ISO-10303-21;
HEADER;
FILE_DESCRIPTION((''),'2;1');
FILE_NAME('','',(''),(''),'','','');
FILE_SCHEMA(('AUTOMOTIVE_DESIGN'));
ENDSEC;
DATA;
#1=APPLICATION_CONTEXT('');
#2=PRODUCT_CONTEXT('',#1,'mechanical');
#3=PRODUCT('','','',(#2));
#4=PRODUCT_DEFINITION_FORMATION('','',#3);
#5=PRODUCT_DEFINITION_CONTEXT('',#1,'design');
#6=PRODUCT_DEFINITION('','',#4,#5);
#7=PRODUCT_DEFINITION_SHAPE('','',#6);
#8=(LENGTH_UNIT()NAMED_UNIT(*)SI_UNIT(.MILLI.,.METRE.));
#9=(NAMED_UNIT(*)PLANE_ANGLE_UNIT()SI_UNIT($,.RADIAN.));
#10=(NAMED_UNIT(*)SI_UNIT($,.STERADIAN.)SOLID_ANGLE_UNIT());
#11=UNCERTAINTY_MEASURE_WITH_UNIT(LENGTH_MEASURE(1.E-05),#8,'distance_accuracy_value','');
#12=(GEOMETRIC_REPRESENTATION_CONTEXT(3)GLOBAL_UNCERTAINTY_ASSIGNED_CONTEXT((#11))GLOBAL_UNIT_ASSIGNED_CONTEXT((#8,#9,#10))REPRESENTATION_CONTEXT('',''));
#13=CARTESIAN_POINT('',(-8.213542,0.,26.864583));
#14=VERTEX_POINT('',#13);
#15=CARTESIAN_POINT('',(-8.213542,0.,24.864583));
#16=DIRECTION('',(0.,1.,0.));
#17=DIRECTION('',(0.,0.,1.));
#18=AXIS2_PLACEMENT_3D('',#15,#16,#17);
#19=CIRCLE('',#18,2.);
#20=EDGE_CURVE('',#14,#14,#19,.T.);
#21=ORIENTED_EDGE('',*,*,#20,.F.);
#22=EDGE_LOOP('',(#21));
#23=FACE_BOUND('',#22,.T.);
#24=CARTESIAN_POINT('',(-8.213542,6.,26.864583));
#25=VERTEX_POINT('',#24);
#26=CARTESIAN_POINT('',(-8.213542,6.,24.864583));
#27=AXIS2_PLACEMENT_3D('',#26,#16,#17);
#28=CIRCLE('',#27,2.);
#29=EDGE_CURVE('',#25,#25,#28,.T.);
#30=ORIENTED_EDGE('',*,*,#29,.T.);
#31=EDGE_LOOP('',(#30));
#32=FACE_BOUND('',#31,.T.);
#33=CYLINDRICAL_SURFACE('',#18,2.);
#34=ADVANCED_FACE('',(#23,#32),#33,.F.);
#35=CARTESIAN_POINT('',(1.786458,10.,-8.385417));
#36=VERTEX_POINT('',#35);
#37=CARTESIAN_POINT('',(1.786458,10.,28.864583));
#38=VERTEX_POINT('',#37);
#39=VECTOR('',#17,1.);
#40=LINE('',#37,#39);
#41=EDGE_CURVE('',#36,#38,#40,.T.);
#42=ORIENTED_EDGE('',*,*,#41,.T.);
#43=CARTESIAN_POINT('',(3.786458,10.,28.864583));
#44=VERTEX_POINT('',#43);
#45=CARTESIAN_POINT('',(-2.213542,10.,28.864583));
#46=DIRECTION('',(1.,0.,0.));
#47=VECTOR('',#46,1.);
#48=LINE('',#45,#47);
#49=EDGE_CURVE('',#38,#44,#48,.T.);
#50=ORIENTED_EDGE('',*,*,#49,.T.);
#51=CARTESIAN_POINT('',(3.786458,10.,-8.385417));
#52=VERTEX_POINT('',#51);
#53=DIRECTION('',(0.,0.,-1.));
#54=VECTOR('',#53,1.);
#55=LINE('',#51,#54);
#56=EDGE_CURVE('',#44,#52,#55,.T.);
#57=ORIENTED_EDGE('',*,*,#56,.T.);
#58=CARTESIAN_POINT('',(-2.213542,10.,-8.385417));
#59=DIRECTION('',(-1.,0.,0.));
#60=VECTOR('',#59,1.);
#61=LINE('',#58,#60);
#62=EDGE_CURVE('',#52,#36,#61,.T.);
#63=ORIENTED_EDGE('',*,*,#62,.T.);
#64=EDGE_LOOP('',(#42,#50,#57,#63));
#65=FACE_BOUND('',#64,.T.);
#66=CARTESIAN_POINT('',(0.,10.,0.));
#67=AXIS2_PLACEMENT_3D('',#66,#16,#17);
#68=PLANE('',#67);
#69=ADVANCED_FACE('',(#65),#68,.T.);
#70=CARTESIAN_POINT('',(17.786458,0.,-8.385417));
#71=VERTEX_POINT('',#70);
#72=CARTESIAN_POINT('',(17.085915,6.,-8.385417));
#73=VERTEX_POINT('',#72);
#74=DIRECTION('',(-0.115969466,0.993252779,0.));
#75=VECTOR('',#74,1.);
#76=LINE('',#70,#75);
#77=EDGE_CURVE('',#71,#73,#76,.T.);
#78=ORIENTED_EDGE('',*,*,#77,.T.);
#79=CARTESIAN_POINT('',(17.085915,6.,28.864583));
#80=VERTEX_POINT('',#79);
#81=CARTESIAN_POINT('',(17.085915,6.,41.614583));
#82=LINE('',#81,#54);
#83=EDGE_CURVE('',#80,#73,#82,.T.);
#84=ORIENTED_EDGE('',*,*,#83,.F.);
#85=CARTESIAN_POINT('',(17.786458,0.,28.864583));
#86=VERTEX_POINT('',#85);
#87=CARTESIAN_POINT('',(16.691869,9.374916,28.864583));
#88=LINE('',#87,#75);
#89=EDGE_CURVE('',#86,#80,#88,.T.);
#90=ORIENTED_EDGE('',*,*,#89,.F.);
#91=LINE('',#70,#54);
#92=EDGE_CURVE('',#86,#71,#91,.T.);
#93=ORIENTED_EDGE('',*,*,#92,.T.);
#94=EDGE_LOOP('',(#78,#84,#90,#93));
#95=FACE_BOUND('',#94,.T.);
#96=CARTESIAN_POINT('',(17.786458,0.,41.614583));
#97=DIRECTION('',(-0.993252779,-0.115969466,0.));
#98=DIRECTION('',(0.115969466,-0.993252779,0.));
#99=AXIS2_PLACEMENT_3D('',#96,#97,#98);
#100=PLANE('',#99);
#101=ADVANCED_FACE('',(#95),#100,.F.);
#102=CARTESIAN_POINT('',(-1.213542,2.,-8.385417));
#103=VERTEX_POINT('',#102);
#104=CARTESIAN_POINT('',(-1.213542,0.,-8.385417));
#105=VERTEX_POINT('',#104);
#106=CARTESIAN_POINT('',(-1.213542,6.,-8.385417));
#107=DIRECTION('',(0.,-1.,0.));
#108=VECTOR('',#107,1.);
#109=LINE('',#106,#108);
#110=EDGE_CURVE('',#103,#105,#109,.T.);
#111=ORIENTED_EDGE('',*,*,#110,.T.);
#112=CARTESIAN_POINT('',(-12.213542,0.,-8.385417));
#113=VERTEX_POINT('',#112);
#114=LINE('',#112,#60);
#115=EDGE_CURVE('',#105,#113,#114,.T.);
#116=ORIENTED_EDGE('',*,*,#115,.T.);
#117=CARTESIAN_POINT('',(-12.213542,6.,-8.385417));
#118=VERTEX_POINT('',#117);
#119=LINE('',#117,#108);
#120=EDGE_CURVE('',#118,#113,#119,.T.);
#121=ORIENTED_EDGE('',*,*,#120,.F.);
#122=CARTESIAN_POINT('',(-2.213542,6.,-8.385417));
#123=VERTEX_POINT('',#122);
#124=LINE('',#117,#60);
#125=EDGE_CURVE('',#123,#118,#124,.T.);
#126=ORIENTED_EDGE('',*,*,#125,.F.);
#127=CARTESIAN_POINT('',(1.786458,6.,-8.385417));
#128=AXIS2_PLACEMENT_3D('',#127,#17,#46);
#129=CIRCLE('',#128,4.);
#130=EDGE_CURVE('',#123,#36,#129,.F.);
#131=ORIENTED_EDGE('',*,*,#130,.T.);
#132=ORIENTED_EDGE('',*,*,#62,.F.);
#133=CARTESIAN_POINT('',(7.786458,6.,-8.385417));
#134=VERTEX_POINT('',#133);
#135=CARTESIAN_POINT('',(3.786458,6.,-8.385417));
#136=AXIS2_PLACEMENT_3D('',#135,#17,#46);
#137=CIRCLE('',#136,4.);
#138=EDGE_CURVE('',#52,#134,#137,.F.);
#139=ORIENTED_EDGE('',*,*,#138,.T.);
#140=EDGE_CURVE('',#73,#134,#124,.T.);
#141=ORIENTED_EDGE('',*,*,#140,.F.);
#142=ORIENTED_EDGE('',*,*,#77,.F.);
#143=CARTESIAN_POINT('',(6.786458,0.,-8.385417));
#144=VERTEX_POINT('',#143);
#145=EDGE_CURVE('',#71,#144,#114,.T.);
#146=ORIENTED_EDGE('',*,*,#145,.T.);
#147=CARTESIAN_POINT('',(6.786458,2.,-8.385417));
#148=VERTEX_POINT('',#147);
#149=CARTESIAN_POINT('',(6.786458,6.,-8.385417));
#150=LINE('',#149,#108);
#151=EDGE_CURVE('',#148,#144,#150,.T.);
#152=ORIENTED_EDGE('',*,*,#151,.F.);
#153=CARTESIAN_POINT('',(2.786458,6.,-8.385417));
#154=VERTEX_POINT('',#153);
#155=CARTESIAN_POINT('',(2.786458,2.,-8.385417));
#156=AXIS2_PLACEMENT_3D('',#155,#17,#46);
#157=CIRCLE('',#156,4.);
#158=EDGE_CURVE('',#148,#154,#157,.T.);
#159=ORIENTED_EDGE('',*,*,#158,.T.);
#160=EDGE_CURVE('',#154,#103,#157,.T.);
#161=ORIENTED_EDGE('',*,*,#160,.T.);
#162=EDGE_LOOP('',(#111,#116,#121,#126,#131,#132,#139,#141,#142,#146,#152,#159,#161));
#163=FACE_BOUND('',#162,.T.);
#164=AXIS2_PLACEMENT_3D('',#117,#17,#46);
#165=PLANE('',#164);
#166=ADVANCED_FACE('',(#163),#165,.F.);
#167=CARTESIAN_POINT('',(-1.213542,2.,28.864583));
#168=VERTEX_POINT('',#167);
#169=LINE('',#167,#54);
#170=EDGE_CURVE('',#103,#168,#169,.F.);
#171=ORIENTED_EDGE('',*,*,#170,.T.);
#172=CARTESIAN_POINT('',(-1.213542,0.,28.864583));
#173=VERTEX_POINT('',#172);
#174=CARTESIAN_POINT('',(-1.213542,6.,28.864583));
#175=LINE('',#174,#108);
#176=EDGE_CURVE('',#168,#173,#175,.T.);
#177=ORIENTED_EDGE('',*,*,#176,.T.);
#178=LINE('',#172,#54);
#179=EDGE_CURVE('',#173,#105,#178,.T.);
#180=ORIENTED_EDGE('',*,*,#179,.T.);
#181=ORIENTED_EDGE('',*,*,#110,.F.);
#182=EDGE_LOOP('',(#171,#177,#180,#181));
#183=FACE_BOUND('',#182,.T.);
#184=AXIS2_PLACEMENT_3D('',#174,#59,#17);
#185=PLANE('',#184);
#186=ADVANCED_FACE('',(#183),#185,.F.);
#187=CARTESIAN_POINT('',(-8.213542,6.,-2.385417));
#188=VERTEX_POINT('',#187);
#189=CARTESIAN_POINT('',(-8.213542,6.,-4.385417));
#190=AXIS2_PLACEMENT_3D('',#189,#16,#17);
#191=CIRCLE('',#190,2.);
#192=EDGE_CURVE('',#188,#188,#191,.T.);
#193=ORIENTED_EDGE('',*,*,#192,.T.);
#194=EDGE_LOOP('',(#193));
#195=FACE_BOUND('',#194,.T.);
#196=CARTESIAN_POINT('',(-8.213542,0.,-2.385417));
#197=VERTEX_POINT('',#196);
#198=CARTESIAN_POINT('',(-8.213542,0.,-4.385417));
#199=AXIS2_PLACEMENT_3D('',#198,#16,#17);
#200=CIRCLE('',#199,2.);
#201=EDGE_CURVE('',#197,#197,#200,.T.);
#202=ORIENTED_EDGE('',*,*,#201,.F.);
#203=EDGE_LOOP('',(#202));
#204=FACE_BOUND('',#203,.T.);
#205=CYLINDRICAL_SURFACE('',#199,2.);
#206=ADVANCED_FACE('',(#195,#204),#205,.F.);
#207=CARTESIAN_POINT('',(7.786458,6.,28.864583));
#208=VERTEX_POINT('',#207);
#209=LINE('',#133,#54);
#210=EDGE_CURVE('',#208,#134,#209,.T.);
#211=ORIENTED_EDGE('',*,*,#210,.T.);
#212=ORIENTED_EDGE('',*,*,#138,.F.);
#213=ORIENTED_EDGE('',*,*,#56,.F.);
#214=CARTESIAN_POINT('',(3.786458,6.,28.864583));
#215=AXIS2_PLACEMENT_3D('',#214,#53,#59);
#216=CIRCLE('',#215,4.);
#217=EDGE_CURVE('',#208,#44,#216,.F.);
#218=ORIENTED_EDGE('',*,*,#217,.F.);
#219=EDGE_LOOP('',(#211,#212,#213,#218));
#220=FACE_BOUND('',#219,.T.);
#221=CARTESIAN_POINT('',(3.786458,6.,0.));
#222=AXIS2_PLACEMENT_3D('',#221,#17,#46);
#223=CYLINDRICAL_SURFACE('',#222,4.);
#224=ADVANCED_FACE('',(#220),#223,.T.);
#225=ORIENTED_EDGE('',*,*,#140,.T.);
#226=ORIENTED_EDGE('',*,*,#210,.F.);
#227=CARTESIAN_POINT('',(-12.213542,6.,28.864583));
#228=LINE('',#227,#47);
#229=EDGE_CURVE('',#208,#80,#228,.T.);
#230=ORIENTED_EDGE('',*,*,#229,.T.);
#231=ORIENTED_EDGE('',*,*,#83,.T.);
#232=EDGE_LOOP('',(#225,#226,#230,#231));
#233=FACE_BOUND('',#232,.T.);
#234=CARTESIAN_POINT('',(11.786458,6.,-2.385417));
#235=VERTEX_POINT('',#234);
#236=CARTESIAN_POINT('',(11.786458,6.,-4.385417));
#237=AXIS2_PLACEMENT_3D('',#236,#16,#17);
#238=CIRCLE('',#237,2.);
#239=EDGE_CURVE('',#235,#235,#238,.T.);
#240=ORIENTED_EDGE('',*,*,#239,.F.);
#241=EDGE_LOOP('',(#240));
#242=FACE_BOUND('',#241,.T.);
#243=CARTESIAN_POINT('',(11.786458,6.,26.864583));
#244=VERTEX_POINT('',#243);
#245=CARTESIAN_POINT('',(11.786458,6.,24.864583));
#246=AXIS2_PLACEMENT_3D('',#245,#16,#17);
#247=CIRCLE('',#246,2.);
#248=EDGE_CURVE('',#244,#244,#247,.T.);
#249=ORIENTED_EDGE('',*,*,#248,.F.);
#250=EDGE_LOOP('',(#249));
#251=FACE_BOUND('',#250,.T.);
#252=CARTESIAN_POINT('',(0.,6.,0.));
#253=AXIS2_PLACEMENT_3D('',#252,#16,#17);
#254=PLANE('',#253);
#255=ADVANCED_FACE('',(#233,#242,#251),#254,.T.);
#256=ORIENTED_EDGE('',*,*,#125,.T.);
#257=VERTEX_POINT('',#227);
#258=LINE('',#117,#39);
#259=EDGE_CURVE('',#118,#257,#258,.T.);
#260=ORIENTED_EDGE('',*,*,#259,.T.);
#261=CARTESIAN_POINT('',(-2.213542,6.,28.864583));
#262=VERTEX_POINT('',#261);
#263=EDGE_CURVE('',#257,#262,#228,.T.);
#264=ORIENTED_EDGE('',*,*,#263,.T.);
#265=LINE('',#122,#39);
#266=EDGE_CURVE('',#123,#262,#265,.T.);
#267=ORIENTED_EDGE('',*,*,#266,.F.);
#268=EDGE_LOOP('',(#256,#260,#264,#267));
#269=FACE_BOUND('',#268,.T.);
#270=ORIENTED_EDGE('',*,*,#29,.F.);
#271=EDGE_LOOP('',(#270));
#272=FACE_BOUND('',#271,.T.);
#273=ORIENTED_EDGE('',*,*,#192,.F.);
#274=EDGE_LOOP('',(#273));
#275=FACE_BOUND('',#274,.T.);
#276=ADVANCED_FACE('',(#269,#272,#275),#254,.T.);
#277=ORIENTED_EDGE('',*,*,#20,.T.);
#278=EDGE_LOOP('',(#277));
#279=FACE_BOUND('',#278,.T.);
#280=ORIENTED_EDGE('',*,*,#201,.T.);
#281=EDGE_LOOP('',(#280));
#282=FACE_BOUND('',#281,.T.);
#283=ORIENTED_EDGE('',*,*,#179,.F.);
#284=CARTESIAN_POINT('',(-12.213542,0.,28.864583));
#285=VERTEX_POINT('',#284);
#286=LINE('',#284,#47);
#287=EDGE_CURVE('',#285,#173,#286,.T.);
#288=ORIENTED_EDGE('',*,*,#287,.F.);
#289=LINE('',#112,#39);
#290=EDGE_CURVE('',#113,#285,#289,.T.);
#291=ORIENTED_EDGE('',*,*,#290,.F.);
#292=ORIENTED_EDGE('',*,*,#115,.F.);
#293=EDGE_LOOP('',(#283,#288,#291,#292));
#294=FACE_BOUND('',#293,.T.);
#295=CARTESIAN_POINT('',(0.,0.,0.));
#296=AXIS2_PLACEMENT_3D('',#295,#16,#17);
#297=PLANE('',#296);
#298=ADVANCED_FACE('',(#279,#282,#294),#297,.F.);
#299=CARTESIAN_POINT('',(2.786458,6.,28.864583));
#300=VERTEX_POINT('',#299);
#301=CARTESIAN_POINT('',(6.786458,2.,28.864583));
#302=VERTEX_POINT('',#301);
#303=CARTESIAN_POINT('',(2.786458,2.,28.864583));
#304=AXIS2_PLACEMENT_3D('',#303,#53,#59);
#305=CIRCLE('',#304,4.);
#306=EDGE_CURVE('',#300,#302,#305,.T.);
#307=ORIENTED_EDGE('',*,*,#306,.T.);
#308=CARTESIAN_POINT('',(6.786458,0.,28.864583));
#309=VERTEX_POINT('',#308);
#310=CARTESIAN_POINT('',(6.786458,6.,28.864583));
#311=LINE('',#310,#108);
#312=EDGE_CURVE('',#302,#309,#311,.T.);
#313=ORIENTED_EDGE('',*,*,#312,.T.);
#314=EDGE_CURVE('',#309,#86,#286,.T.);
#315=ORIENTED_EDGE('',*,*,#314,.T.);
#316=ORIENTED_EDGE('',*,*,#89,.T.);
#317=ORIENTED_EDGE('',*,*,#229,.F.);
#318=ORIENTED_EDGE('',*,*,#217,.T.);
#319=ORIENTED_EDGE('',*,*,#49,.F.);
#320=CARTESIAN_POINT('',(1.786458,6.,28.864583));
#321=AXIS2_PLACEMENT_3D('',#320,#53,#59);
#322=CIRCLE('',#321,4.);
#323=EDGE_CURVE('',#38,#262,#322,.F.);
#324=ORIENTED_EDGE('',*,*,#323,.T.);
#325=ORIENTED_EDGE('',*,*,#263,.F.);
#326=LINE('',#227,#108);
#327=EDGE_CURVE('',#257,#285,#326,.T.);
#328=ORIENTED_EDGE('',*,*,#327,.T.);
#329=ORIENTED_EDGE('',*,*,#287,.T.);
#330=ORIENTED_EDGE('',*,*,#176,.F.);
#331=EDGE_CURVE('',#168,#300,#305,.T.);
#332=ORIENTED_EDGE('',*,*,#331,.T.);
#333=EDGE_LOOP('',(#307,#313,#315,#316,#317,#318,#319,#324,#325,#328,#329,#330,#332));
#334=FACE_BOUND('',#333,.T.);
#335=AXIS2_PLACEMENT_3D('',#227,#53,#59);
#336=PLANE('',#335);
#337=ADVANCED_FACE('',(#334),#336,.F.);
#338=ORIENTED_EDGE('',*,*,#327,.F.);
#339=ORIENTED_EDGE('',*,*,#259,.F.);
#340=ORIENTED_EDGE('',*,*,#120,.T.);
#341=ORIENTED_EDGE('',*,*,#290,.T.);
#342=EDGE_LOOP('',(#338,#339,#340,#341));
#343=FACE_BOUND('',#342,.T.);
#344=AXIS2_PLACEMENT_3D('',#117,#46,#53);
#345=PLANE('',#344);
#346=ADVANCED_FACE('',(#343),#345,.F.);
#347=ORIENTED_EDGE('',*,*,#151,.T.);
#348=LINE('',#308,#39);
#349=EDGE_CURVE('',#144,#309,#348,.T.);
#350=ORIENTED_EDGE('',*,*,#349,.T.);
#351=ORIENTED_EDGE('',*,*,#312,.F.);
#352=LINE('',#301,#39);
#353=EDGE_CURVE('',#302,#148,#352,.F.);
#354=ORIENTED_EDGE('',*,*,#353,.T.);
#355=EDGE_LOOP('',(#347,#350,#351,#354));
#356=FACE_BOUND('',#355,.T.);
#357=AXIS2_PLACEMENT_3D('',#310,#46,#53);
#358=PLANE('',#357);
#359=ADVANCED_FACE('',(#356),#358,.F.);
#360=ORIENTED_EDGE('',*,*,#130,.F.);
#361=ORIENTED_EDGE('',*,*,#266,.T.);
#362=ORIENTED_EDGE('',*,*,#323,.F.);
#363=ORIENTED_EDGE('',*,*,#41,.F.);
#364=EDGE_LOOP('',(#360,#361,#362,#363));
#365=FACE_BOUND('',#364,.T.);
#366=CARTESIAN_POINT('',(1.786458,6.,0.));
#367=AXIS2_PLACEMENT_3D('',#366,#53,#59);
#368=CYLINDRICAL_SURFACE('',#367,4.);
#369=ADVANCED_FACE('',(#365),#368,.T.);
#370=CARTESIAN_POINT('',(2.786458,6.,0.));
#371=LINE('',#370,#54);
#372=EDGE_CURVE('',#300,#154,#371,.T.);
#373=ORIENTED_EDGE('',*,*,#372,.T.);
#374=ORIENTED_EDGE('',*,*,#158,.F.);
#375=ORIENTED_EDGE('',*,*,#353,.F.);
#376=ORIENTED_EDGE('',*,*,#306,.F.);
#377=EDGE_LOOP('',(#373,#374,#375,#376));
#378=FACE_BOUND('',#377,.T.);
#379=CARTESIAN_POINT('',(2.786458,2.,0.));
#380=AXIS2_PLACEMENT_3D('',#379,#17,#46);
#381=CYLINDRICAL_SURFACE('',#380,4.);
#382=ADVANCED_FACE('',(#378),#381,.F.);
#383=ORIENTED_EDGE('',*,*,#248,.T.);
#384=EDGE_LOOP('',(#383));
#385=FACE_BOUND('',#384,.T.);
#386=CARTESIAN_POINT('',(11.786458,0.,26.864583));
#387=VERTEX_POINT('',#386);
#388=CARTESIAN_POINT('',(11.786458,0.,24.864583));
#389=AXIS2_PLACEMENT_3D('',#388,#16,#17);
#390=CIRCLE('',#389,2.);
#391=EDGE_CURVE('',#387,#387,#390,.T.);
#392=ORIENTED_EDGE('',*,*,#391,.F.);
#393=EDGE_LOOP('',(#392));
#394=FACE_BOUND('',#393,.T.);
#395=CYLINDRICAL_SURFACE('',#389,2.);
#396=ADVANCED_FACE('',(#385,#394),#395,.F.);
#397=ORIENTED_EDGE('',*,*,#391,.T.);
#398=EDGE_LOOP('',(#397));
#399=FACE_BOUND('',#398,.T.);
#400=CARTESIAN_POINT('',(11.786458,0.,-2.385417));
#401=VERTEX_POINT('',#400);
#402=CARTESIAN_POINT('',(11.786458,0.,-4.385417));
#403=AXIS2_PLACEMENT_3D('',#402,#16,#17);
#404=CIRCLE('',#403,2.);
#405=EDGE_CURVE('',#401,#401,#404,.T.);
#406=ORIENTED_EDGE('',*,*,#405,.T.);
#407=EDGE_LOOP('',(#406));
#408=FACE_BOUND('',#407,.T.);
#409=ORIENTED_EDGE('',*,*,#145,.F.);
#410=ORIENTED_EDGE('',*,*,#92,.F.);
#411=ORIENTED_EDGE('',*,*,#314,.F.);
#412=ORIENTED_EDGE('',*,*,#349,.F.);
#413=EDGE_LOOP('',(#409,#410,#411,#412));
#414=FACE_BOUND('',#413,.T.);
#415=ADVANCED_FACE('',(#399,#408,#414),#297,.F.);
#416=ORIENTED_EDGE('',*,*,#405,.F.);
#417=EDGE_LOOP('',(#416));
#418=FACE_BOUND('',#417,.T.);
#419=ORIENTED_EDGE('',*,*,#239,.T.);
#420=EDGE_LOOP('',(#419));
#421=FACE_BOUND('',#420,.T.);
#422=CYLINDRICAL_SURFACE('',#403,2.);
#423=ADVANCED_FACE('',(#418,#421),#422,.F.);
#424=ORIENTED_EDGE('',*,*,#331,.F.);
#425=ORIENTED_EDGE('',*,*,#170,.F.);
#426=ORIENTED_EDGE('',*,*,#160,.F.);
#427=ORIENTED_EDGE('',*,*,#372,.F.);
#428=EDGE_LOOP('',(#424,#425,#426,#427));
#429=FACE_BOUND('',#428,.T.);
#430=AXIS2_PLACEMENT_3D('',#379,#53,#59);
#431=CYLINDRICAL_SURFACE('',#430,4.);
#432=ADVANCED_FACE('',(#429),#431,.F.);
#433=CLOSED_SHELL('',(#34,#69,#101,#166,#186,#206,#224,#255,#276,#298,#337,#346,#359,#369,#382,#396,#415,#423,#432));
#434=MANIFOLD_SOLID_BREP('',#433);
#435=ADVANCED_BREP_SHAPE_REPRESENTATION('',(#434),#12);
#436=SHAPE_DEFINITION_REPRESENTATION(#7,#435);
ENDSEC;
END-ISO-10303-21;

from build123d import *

# Parameters (mm, degrees)
SKETCH1_W           = 30
SKETCH1_H           = 37.25
BOSS_EXTRUDE1_DEPTH = 6
SKETCH2_R           = 2
CUT_EXTRUDE1_DEPTH  = 6
SKETCH3_W           = 10
SKETCH3_H           = 37.25
BOSS_EXTRUDE2_DEPTH = 4
SKETCH4_W           = 8
SKETCH4_H           = 37.25
CUT_EXTRUDE2_DEPTH  = 6
FILLET2_R           = 4
FILLET3_R           = 4
CUT_EXTRUDE3_DEPTH  = 50


with BuildPart() as part:
    # Sketch1 → Boss-Extrude1 (new body)
    with BuildSketch(Plane(origin=(0, 0, 0), x_dir=(1, 0, 0), z_dir=(0, 1, 0))):
        with Locations((2.786458333, -10.239583333)):
            Rectangle(SKETCH1_W, SKETCH1_H)
    extrude(amount=BOSS_EXTRUDE1_DEPTH)

    # Sketch2 → Cut-Extrude1 (cut)
    with BuildSketch(Plane(origin=(0, 6, 0), x_dir=(1, 0, 0), z_dir=(0, 1, 0))):
        with Locations(Location((-8.213541667, -24.864583333, 0), (0, 0, 270))):
            Circle(SKETCH2_R)
        with Locations(Location((11.786458333, 4.385416667, 0), (0, 0, 270))):
            Circle(SKETCH2_R)
        with Locations(Location((11.786458333, -24.864583333, 0), (0, 0, 270))):
            Circle(SKETCH2_R)
        with Locations(Location((-8.213541667, 4.385416667, 0), (0, 0, 270))):
            Circle(SKETCH2_R)
    extrude(amount=-CUT_EXTRUDE1_DEPTH, mode=Mode.SUBTRACT)

    # Sketch3 → Boss-Extrude2 (add)
    with BuildSketch(Plane(origin=(0, 6, 0), x_dir=(1, 0, 0), z_dir=(0, 1, 0))):
        with Locations((2.786458333, -10.239583333)):
            Rectangle(SKETCH3_W, SKETCH3_H)
    extrude(amount=BOSS_EXTRUDE2_DEPTH)

    # Sketch4 → Cut-Extrude2 (cut)
    with BuildSketch(Plane.XZ):
        with Locations((2.786458333, 10.239583333)):
            Rectangle(SKETCH4_W, SKETCH4_H)
    extrude(amount=-CUT_EXTRUDE2_DEPTH, mode=Mode.SUBTRACT)

    # Fillet2
    fillet2_edges = [part.edges().sort_by_distance(p)[0] for p in [
        (6.786458333, 6, 10.239583333),
        (-1.213541667, 6, 10.239583333),
    ]]
    fillet(fillet2_edges, radius=FILLET2_R - 0.0001)  # a hair under: the kernel refuses the full size

    # Fillet3
    fillet3_edges = [part.edges().sort_by_distance(p)[0] for p in [
        (7.786458333, 10, 10.239583333),
        (-2.213541667, 10, 10.239583333),
    ]]
    fillet(fillet3_edges, radius=FILLET3_R - 0.0001)  # a hair under: the kernel refuses the full size

    # Sketch5 → Cut-Extrude3 (cut)
    with BuildSketch(Plane(origin=(0, 0, -8.385416667), x_dir=(-1, 0, 0), z_dir=(0, 0, -1))):
        Polygon((-17.786458333, 0), (-17.085914813, 6), (-17.786458333, 6), align=None)
    extrude(amount=-CUT_EXTRUDE3_DEPTH, mode=Mode.SUBTRACT)


solid = part.part
